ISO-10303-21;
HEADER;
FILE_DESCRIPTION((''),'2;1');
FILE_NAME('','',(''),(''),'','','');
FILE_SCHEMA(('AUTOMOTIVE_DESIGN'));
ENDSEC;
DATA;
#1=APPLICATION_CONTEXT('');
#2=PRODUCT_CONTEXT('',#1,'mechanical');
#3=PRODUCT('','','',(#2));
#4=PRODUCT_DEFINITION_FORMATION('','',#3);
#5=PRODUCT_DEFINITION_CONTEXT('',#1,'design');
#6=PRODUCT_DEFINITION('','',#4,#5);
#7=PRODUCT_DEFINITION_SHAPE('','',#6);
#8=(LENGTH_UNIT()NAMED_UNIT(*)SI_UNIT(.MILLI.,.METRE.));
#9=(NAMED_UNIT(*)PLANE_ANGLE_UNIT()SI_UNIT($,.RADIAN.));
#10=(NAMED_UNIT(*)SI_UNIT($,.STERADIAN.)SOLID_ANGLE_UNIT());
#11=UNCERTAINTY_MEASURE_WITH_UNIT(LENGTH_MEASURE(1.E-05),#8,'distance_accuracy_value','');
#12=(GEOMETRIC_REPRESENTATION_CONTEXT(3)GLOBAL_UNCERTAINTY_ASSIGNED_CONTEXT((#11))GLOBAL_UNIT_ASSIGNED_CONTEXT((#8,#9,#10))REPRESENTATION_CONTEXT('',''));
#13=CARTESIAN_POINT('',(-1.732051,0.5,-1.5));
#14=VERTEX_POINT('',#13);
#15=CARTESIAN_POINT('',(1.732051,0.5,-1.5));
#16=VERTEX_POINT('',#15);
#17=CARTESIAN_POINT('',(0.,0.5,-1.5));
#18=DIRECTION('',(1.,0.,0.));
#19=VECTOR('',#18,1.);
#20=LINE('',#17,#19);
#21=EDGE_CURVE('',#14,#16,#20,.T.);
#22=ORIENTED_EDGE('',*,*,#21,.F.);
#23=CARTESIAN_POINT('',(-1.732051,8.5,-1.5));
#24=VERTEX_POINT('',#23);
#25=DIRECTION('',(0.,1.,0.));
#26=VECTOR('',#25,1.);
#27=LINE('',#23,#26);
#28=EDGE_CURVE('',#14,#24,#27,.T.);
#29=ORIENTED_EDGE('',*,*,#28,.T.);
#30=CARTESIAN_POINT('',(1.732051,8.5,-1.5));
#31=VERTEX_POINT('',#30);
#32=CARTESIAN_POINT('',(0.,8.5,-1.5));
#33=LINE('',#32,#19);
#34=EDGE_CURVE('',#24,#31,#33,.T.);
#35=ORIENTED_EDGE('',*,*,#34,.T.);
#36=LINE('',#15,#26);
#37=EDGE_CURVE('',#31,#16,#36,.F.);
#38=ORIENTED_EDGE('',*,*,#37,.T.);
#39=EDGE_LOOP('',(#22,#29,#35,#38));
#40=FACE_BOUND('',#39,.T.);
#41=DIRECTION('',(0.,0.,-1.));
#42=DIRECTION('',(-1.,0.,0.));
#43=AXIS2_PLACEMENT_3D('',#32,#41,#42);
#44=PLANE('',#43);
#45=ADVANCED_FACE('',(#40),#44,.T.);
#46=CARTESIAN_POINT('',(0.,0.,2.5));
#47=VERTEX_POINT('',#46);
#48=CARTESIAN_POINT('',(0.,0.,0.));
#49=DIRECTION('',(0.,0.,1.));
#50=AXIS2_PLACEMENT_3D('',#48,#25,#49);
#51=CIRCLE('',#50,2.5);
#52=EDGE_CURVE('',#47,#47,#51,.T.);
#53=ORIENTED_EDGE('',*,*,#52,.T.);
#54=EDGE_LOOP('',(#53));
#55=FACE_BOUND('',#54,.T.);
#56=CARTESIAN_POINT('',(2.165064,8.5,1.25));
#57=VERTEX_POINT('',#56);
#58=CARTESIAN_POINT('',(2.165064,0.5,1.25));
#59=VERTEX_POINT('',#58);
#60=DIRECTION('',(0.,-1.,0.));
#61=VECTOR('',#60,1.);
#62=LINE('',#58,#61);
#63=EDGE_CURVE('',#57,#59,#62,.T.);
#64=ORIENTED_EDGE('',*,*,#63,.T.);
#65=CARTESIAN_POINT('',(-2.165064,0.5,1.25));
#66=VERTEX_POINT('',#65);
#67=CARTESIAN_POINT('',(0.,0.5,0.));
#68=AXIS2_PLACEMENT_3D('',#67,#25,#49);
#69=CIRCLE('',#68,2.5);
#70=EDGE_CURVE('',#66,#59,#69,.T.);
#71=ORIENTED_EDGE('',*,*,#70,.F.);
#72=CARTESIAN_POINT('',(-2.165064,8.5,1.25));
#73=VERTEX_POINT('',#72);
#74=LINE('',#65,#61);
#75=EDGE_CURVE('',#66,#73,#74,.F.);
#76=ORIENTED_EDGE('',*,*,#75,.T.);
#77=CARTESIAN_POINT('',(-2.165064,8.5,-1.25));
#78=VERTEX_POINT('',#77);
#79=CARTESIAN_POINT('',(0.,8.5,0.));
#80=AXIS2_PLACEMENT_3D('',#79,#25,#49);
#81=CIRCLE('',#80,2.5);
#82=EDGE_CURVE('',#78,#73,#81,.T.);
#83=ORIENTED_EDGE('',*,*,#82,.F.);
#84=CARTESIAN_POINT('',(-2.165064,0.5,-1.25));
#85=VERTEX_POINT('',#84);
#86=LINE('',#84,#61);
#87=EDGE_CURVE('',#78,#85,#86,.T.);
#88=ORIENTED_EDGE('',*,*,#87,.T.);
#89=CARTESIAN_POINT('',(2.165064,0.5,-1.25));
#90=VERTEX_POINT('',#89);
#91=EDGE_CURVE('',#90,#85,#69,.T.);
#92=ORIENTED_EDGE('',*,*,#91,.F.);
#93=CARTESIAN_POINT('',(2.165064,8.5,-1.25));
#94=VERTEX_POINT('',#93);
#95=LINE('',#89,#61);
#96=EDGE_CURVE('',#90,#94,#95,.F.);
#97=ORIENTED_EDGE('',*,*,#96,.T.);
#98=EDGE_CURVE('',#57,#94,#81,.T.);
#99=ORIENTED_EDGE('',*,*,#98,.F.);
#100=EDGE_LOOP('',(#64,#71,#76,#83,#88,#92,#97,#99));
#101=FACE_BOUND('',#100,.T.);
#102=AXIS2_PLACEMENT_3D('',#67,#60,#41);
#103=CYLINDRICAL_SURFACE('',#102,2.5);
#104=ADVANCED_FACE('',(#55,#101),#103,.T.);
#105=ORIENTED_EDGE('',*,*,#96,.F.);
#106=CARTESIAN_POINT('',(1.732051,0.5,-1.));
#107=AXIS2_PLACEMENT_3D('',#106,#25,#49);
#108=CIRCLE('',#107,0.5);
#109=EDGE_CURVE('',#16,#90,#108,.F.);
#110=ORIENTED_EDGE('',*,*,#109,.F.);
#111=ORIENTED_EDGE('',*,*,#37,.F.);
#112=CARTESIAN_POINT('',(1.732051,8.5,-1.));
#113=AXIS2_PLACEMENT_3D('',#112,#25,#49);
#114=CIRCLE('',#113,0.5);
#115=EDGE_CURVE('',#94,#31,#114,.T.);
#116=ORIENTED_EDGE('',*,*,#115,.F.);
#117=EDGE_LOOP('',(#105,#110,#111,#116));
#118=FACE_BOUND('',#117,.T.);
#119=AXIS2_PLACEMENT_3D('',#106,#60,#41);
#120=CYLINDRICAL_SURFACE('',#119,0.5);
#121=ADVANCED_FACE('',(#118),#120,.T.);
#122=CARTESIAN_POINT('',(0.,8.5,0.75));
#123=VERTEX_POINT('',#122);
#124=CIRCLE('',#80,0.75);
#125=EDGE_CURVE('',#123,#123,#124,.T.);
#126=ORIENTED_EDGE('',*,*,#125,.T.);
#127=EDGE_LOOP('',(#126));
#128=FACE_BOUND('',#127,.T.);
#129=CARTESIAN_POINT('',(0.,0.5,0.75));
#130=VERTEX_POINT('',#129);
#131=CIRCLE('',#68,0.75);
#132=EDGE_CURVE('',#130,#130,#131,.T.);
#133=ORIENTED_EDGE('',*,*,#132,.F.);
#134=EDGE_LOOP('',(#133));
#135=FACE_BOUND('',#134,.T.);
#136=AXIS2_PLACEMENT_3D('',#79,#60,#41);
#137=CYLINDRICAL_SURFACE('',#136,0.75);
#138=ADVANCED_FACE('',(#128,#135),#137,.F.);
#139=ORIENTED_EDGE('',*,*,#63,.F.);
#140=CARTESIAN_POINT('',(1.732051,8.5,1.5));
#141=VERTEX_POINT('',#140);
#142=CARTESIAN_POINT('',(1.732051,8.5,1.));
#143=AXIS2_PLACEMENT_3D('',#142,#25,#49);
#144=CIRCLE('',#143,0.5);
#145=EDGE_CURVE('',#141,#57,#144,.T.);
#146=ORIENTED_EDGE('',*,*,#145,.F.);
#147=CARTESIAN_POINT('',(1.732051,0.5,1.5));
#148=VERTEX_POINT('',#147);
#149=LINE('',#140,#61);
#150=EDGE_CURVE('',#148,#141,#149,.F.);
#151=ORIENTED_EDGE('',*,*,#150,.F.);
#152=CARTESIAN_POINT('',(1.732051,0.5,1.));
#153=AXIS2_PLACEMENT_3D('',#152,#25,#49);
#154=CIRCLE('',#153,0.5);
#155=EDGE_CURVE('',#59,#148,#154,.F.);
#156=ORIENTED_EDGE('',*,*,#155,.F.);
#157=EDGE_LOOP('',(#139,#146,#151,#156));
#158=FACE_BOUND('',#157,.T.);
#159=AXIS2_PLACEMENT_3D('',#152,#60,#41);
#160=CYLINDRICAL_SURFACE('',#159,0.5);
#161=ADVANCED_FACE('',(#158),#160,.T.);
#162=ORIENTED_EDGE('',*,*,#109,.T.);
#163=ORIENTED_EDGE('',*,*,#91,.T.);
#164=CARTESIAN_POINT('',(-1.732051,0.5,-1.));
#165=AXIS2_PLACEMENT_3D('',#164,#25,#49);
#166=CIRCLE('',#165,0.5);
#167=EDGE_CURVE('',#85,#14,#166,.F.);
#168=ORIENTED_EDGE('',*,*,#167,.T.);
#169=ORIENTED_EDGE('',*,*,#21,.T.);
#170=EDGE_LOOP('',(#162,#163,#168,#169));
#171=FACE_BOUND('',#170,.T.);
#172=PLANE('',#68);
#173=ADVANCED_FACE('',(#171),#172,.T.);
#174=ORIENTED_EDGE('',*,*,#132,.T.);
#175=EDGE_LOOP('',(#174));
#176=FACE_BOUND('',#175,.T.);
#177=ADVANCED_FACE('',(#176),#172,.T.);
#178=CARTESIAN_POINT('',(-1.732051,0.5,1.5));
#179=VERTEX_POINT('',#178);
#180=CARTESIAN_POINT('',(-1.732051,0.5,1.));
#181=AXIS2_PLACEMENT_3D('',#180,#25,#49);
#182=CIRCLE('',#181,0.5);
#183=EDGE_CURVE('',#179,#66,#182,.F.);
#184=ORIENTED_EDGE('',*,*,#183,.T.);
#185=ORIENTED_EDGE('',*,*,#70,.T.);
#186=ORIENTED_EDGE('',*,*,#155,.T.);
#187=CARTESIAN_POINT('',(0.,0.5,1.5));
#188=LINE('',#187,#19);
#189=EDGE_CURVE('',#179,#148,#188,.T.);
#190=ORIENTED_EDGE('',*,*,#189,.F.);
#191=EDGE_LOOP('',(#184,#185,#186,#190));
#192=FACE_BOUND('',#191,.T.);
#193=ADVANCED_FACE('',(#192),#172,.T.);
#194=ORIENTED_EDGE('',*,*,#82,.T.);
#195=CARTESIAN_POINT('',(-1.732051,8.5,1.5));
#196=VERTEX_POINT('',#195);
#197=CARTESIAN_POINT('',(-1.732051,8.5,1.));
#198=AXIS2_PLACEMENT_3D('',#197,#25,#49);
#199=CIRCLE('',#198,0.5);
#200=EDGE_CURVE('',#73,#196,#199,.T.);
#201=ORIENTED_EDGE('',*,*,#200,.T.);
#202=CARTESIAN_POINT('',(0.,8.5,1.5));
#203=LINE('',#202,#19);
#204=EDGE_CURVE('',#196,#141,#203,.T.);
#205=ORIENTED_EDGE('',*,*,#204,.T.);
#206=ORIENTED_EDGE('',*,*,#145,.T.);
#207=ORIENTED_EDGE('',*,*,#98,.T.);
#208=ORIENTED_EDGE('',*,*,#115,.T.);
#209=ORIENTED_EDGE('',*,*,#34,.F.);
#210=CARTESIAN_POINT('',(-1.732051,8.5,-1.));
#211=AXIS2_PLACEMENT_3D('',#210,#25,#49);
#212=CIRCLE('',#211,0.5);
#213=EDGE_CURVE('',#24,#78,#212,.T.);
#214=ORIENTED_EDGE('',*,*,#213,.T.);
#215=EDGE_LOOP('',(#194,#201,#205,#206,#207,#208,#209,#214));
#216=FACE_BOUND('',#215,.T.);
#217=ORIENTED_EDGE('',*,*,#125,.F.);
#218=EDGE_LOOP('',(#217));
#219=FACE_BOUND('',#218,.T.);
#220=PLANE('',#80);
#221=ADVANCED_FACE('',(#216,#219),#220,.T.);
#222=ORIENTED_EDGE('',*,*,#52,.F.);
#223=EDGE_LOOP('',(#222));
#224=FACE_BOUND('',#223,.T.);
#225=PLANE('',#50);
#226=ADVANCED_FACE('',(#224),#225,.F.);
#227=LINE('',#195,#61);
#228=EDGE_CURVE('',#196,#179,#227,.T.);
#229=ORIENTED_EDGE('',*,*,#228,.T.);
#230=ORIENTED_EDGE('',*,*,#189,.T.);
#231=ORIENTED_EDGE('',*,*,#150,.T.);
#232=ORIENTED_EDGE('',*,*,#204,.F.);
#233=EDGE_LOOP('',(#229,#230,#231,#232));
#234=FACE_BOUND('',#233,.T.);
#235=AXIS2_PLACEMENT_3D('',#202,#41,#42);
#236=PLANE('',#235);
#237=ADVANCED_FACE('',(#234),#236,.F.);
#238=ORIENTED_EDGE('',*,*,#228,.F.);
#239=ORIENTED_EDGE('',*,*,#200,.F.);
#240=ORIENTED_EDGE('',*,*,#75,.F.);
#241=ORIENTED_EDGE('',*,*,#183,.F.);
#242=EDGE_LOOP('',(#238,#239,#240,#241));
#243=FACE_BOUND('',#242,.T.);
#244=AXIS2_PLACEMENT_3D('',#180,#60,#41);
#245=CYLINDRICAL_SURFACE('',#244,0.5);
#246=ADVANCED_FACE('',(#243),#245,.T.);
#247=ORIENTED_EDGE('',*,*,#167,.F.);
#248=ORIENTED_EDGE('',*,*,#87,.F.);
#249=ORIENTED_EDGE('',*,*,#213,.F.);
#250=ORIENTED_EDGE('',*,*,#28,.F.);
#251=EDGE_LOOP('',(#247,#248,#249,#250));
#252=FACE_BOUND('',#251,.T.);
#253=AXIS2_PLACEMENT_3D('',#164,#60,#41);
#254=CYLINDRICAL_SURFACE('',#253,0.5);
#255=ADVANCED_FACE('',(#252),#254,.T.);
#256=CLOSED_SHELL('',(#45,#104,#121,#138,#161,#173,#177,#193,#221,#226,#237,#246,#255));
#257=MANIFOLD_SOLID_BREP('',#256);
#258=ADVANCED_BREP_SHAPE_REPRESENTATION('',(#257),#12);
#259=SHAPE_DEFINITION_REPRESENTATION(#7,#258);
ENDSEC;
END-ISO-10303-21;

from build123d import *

# Parameters (mm, degrees)
SKETCH2_R           = 2.5
BOSS_EXTRUDE1_DEPTH = 0.5
BOSS_EXTRUDE2_DEPTH = 8
FILLET1_R           = 0.5


with BuildPart() as part:
    # Sketch2 → Boss-Extrude1 (new body)
    with BuildSketch(Plane(origin=(0, 0, 0), x_dir=(1, 0, 0), z_dir=(0, 1, 0))):
        with Locations(Location((0, 0, 0), (0, 0, 270))):
            Circle(SKETCH2_R)
    extrude(amount=BOSS_EXTRUDE1_DEPTH)

    # Sketch3 → Boss-Extrude2 (add)
    with BuildSketch(Plane(origin=(0, 0.5, 0), x_dir=(1, 0, 0), z_dir=(0, 1, 0))):
        with BuildLine():
            Line((2, 1.5), (-2, 1.5))
            ThreePointArc((-2, 1.5), (-2.371708245, 0.790569415), (-2.5, 0))
            Line((-2.5, 0), (-0.75, 0))
            ThreePointArc((-0.75, 0), (0, 0.75), (0.75, 0))
            Line((0.75, 0), (2.5, 0))
            ThreePointArc((2.5, 0), (2.371708245, 0.790569415), (2, 1.5))
        make_face()
        with BuildLine():
            Line((-0.75, 0), (-2.5, 0))
            ThreePointArc((-2.5, 0), (-2.371708245, -0.790569415), (-2, -1.5))
            Line((-2, -1.5), (2, -1.5))
            ThreePointArc((2, -1.5), (2.371708245, -0.790569415), (2.5, 0))
            Line((2.5, 0), (0.75, 0))
            ThreePointArc((0.75, 0), (0, -0.75), (-0.75, 0))
        make_face()
    extrude(amount=BOSS_EXTRUDE2_DEPTH)

    # Fillet1
    # the kernel refuses this fillet: 0.5 mm, written as the material it takes off along each edge
    with BuildSketch(Plane(origin=(-2, 0.5, -1.5), x_dir=(-0.5509898714915042, 0, 0.8345119301206998), z_dir=(0, 1, 0)), Plane(origin=(2, 0.5, 1.5), x_dir=(0.5509898714915042, 0, -0.8345119301206998), z_dir=(0, 1, 0))) as fillet1_piece_1:
        with BuildLine():
            CenterArc((0.269618674, 0.499101733), FILLET1_R, 213.434948823, 60)
            Line((-0.147637291, 0.223606798), (0, 0))
            ThreePointArc((0, 0), (0.149788152, -0.004491333), (0.299576304, 0))
        make_face()
    extrude(amount=8.748940761, mode=Mode.SUBTRACT)
    with BuildSketch(Plane(origin=(2, 0.5, -1.5), x_dir=(0.5509898714915049, 0, 0.8345119301206994), z_dir=(0, 1, 0)), Plane(origin=(-2, 0.5, 1.5), x_dir=(-0.5509898714915045, 0, -0.8345119301206995), z_dir=(0, 1, 0))) as fillet1_piece_2:
        with BuildLine():
            CenterArc((0.269618674, -0.499101733), FILLET1_R, 86.565051177, 60)
            Line((-0.147637291, -0.223606798), (0, 0))
            ThreePointArc((0, 0), (0.149788152, 0.004491333), (0.299576304, 0))
        make_face()
    extrude(amount=8.748940761, mode=Mode.SUBTRACT)


solid = part.part
